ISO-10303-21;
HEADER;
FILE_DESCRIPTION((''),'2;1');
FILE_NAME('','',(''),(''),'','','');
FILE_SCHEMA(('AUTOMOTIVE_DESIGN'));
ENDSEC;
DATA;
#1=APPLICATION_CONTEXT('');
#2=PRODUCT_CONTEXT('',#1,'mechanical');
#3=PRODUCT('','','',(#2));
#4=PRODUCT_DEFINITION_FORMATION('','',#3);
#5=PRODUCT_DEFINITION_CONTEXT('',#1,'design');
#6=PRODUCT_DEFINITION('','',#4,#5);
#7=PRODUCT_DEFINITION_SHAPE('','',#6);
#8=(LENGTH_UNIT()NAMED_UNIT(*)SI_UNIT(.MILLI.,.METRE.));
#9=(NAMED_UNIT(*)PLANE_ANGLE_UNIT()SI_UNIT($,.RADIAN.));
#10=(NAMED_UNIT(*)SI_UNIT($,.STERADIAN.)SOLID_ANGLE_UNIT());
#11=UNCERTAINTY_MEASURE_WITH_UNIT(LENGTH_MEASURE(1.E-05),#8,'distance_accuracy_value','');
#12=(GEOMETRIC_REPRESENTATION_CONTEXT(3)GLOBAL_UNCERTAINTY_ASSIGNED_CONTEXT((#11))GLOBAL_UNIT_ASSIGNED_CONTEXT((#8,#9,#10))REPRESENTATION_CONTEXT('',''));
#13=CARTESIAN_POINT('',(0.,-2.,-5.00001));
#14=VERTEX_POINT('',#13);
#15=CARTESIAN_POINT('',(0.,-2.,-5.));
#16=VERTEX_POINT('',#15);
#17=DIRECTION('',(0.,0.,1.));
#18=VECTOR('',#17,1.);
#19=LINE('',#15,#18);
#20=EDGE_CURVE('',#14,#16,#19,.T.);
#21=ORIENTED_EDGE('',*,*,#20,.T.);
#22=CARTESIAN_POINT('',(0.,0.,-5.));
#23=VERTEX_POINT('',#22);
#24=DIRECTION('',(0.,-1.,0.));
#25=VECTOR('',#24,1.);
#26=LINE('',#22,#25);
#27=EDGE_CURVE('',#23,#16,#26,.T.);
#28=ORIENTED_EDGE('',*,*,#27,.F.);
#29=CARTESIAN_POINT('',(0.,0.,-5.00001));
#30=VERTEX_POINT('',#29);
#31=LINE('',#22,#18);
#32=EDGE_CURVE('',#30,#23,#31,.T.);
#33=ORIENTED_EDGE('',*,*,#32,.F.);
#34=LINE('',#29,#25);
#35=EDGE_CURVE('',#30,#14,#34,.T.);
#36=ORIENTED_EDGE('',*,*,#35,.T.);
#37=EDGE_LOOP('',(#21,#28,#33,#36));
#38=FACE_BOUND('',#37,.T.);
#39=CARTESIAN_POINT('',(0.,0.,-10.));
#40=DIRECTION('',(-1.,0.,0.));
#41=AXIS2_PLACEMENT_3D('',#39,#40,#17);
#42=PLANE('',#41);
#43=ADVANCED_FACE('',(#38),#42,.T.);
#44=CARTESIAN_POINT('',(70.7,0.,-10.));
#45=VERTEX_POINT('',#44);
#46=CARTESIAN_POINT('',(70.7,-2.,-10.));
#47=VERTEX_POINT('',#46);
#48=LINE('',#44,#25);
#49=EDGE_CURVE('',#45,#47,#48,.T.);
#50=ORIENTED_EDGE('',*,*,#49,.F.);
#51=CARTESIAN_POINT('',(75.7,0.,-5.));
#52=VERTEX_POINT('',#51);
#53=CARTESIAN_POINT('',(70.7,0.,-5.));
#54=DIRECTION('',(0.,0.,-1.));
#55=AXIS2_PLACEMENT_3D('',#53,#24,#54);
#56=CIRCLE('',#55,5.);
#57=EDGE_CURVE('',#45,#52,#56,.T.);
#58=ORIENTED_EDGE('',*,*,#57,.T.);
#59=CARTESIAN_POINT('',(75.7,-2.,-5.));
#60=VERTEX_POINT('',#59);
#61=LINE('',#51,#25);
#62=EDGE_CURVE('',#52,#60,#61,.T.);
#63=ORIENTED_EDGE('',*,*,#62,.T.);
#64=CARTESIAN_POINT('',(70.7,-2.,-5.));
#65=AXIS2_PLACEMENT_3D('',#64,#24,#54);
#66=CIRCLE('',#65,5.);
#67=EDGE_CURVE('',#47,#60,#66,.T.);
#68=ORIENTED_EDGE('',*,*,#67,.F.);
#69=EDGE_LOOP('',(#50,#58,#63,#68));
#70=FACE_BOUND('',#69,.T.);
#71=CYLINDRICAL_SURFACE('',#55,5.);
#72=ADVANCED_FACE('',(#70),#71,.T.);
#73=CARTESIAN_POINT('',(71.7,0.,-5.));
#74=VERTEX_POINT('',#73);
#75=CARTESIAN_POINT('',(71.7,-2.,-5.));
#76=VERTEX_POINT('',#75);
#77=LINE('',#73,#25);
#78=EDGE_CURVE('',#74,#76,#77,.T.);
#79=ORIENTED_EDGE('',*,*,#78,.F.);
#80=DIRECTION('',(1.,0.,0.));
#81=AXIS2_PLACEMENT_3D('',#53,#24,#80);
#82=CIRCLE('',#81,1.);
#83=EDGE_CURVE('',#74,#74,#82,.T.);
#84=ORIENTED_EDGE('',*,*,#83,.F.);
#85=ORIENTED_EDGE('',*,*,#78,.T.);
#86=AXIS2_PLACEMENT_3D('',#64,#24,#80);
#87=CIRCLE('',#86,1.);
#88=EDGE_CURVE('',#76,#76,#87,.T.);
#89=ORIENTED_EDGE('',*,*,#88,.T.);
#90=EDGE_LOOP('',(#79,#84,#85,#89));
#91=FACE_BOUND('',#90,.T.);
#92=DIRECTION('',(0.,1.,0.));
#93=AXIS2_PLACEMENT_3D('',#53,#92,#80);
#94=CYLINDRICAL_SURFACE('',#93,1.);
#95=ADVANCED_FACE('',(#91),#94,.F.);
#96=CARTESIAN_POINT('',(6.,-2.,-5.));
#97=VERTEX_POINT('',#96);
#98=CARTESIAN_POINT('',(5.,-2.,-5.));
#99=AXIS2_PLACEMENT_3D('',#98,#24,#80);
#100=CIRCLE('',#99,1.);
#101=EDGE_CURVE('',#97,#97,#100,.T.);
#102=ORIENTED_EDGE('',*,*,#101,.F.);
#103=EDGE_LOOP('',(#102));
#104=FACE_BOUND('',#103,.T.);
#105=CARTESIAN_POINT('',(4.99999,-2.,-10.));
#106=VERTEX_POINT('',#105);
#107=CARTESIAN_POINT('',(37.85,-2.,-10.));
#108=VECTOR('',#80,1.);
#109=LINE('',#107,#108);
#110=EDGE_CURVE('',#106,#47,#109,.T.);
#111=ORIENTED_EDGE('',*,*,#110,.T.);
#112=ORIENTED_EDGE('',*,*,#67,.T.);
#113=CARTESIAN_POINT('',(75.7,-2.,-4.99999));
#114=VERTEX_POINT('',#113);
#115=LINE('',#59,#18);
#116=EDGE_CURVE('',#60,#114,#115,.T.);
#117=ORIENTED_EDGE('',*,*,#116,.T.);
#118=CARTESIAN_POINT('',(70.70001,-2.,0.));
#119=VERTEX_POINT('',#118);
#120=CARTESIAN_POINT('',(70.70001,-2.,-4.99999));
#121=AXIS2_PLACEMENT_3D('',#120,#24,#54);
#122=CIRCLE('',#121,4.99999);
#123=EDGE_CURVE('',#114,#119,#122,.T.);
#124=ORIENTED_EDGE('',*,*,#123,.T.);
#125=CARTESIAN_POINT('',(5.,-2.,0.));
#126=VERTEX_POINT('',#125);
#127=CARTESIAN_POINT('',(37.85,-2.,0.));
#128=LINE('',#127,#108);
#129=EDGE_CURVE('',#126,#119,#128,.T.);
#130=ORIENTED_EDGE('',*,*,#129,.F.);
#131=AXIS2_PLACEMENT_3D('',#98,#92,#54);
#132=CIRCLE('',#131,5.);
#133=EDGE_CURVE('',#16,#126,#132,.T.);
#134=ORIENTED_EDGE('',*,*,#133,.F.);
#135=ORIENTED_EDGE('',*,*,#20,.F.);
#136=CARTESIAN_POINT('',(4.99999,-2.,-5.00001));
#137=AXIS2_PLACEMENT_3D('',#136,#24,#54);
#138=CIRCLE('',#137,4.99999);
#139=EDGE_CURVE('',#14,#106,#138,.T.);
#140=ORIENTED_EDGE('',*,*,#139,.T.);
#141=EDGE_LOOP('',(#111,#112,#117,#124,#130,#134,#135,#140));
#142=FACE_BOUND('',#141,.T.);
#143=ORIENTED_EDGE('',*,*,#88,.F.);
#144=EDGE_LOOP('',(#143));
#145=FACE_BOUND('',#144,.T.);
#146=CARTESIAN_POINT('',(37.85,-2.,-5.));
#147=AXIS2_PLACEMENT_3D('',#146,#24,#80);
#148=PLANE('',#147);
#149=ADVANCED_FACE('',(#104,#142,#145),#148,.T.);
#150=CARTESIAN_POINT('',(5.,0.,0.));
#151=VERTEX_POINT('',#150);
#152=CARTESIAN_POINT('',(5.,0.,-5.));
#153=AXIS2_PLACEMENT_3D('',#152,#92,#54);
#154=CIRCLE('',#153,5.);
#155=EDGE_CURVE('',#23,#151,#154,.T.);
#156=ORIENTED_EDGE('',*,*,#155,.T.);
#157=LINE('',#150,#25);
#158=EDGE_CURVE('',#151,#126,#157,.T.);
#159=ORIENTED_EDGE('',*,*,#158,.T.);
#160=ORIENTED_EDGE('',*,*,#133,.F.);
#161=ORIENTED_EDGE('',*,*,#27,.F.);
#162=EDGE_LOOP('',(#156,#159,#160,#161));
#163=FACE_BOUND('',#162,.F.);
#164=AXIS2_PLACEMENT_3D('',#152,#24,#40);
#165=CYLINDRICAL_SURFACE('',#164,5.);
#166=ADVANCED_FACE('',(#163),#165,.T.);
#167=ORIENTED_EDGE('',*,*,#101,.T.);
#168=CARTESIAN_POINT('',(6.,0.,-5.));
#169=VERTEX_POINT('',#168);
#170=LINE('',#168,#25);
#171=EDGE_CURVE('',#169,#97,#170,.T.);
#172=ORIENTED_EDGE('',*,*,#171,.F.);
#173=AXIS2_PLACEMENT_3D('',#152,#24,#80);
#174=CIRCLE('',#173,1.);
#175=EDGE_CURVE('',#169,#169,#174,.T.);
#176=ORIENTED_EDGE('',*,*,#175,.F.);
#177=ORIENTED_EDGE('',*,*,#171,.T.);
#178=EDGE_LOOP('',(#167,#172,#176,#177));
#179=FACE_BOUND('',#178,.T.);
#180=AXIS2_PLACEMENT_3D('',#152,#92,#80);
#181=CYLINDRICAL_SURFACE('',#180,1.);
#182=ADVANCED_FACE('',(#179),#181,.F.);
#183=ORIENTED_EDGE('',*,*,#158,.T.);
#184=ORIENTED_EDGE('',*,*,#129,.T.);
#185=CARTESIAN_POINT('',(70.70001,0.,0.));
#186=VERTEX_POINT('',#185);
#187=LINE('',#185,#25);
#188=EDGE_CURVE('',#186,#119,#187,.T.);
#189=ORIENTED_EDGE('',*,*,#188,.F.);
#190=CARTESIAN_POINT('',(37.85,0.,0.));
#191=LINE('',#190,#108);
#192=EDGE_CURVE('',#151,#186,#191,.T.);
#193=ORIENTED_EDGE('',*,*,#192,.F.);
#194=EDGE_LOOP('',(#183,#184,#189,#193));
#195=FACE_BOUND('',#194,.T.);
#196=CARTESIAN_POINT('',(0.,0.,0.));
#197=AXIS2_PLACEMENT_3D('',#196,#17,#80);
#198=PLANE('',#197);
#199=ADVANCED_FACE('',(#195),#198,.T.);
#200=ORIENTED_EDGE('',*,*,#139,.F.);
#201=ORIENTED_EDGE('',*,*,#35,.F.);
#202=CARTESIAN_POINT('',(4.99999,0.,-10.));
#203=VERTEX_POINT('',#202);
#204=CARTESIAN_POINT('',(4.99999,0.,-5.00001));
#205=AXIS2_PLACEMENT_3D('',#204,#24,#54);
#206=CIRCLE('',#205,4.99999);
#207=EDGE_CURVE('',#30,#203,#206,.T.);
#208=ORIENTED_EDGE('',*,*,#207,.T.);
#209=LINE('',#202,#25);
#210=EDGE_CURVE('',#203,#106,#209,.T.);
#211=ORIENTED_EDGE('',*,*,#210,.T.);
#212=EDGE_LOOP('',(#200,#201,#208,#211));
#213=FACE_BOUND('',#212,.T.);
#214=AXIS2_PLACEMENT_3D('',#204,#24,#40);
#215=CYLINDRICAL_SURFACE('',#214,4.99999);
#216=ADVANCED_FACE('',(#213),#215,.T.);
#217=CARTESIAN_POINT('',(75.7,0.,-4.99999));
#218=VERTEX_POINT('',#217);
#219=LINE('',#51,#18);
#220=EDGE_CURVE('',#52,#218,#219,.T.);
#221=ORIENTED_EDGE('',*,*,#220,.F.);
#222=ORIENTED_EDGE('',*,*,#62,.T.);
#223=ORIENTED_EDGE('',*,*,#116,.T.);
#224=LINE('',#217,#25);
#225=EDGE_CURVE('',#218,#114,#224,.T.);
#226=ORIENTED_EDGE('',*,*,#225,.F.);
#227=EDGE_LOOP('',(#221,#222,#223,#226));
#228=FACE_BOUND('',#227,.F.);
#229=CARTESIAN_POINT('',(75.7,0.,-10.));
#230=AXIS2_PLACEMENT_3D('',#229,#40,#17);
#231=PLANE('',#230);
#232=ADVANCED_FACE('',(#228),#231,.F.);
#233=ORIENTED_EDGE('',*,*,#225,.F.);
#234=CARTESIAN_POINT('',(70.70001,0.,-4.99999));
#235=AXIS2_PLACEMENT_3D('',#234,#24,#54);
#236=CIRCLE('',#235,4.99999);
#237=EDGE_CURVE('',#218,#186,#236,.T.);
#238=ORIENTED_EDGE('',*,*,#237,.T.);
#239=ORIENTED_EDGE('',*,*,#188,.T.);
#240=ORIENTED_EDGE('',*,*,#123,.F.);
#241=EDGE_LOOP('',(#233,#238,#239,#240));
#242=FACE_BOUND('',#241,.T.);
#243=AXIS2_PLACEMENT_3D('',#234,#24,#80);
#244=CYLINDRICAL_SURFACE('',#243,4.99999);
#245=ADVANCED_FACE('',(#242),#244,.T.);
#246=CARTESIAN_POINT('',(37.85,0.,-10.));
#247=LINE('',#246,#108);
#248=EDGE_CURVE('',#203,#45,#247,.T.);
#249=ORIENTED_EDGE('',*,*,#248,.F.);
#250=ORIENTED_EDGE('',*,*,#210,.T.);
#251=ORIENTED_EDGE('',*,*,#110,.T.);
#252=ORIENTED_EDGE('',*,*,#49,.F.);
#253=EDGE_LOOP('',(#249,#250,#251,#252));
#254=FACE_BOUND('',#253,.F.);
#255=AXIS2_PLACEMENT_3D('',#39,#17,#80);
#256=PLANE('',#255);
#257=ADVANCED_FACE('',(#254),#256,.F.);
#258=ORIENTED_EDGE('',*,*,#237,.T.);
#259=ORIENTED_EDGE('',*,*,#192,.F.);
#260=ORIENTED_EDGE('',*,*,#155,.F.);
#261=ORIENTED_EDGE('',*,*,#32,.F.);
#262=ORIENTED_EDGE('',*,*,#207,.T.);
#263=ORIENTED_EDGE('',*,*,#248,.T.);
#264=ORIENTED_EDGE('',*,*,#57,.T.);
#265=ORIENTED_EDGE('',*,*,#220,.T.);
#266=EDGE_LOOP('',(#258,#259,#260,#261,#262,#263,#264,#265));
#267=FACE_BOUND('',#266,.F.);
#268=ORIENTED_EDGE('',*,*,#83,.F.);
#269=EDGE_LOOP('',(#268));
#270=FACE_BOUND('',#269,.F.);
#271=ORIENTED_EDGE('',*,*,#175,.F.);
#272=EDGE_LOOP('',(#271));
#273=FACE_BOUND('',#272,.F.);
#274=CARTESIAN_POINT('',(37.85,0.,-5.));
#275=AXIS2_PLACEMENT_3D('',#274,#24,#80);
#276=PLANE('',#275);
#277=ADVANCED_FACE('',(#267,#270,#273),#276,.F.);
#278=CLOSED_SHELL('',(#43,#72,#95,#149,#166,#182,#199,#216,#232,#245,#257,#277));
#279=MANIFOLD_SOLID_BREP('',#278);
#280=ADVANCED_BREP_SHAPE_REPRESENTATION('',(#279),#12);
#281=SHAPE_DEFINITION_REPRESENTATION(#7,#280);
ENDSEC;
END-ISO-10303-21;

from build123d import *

# Parameters (mm, degrees)
F0_W     = 75.7
F0_H     = 10
F0_R     = 1
F1_DEPTH = 2
F2_R     = 5
F3_R     = 4.99999
F4_R     = 5
F5_R     = 4.99999


# Not quite as in the source:
# - a fillet or chamfer is up to 0.001 mm smaller than in the source, because OpenCascade refuses the exact size


with BuildPart() as f1:
    # F0 (on Front) → F1 (new body)
    with BuildSketch(Plane.XZ):
        with Locations((37.85, -5)):
            Rectangle(F0_W, F0_H)
        with Locations((5, -5)):
            Circle(F0_R, mode=Mode.SUBTRACT)
        with Locations((70.7, -5)):
            Circle(F0_R, mode=Mode.SUBTRACT)
    extrude(amount=F1_DEPTH)

    # F2
    f2_edges = [f1.edges().sort_by_distance(p)[0] for p in [
        (0, -1, 0),
    ]]
    fillet(f2_edges, radius=F2_R)

    # F3 (radius 5 in the source; OpenCascade refuses exactly that, so slightly less here)
    f3_edges = [f1.edges().sort_by_distance(p)[0] for p in [
        (0, -1, -10),
    ]]
    fillet(f3_edges, radius=F3_R)

    # F4
    f4_edges = [f1.edges().sort_by_distance(p)[0] for p in [
        (75.7, -1, -10),
    ]]
    fillet(f4_edges, radius=F4_R)

    # F5 (radius 5 in the source; OpenCascade refuses exactly that, so slightly less here)
    f5_edges = [f1.edges().sort_by_distance(p)[0] for p in [
        (75.7, -1, 0),
    ]]
    fillet(f5_edges, radius=F5_R)


solid = f1.part
